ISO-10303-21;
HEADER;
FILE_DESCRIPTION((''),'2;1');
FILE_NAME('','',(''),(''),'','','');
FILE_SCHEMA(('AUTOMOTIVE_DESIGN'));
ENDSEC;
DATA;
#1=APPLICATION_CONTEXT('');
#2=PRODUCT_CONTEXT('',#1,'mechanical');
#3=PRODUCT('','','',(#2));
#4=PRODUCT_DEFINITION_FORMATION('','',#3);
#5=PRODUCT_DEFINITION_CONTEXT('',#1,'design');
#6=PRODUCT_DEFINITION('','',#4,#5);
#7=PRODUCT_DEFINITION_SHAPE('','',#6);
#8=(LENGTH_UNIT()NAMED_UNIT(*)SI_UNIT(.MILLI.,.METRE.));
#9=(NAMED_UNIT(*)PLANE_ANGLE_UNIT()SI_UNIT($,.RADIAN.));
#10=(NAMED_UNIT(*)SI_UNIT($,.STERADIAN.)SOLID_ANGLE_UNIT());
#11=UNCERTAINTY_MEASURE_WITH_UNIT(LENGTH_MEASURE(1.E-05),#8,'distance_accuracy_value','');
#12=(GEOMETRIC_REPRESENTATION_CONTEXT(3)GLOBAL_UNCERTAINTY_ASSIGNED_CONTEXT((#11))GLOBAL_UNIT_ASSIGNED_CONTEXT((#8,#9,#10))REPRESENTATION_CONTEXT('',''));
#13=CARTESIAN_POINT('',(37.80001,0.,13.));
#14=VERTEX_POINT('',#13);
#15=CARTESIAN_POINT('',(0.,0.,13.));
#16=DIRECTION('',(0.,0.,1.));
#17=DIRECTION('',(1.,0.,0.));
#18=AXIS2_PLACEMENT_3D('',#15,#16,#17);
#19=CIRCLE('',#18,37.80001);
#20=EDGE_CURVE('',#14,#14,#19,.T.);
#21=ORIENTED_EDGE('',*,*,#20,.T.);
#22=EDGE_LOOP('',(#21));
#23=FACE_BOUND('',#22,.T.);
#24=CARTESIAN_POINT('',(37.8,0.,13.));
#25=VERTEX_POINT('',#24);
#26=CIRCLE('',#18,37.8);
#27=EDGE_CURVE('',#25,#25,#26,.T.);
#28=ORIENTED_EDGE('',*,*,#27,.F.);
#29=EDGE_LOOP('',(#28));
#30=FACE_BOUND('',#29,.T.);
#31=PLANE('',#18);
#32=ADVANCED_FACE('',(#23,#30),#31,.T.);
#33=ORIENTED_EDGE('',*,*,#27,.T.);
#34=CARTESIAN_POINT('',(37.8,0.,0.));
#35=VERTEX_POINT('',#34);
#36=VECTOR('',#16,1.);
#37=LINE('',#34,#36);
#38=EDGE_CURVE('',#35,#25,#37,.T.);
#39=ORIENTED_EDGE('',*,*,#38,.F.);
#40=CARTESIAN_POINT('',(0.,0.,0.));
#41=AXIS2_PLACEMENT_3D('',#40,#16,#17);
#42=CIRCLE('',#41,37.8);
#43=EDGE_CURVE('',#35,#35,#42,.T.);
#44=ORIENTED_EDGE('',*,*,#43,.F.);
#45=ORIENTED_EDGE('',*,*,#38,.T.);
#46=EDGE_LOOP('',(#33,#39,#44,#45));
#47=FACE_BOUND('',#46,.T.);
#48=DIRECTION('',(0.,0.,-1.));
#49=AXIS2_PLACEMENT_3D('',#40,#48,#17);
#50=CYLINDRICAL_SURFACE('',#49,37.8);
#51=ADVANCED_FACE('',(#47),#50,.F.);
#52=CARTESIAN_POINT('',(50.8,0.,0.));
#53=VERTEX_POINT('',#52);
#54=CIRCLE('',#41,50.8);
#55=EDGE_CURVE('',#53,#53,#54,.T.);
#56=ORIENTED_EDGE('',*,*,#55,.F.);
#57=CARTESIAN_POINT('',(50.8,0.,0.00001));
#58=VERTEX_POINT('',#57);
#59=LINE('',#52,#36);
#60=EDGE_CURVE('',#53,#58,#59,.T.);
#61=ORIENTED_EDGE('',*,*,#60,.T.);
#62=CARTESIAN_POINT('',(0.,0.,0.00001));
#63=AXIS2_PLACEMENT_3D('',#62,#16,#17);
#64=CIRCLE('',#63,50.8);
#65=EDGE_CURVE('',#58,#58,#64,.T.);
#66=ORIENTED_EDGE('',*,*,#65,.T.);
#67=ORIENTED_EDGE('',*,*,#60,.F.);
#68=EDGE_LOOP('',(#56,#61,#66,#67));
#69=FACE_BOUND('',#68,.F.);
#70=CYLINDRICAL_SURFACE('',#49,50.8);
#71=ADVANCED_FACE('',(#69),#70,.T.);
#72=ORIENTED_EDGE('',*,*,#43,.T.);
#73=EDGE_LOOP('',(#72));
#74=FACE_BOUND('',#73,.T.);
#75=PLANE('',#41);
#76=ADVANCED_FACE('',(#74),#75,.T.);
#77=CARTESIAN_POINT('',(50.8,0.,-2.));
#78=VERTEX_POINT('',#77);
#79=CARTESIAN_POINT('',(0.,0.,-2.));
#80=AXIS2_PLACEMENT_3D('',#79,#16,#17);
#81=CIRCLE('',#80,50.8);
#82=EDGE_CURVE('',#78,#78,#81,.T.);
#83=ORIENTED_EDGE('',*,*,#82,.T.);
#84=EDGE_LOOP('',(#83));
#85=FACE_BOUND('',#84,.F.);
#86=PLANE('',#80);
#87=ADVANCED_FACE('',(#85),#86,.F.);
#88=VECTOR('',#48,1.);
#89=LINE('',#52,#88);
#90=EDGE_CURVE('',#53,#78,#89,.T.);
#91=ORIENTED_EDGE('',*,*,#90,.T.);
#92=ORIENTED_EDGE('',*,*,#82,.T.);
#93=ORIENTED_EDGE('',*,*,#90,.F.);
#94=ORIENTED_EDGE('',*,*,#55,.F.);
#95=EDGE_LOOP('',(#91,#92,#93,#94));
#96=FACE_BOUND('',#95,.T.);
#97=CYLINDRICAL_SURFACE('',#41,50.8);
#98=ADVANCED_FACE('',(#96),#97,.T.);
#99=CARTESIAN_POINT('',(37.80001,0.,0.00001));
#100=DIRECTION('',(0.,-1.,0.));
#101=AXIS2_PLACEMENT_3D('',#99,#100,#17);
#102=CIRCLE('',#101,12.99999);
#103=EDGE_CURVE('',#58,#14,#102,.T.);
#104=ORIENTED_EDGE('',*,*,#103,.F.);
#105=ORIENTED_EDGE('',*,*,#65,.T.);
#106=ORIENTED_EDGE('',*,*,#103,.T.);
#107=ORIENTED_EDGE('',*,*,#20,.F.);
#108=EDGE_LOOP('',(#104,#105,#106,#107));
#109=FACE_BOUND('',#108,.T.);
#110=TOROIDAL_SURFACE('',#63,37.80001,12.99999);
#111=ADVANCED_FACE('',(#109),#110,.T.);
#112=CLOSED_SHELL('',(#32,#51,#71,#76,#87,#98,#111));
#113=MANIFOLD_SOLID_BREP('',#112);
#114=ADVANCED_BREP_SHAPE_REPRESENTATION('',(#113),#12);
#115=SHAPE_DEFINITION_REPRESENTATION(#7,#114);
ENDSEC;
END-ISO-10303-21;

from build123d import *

# Parameters (mm, degrees)
F0_R     = 50.8
F0_R_2   = 37.8
F1_DEPTH = 2
F2_DEPTH = 13
F3_R     = 12.99999


# Not quite as in the source:
# - a fillet or chamfer is up to 0.001 mm smaller than in the source, because OpenCascade refuses the exact size


with BuildPart() as f1:
    # F0 (on Top) → F1 (new body)
    with BuildSketch(Plane.XY):
        Circle(F0_R)
        Circle(F0_R_2, mode=Mode.SUBTRACT)
        Circle(F0_R_2)
    extrude(amount=-F1_DEPTH)

    # F0 (on Top) → F2 (join)
    with BuildSketch(Plane.XY):
        Circle(F0_R)
        Circle(F0_R_2, mode=Mode.SUBTRACT)
    extrude(amount=F2_DEPTH)

    # F3 (radius 13 in the source; OpenCascade refuses exactly that, so slightly less here)
    f3_edges = [f1.edges().sort_by_distance(p)[0] for p in [
        (-50.8, 0, 13),
    ]]
    fillet(f3_edges, radius=F3_R)


solid = f1.part
